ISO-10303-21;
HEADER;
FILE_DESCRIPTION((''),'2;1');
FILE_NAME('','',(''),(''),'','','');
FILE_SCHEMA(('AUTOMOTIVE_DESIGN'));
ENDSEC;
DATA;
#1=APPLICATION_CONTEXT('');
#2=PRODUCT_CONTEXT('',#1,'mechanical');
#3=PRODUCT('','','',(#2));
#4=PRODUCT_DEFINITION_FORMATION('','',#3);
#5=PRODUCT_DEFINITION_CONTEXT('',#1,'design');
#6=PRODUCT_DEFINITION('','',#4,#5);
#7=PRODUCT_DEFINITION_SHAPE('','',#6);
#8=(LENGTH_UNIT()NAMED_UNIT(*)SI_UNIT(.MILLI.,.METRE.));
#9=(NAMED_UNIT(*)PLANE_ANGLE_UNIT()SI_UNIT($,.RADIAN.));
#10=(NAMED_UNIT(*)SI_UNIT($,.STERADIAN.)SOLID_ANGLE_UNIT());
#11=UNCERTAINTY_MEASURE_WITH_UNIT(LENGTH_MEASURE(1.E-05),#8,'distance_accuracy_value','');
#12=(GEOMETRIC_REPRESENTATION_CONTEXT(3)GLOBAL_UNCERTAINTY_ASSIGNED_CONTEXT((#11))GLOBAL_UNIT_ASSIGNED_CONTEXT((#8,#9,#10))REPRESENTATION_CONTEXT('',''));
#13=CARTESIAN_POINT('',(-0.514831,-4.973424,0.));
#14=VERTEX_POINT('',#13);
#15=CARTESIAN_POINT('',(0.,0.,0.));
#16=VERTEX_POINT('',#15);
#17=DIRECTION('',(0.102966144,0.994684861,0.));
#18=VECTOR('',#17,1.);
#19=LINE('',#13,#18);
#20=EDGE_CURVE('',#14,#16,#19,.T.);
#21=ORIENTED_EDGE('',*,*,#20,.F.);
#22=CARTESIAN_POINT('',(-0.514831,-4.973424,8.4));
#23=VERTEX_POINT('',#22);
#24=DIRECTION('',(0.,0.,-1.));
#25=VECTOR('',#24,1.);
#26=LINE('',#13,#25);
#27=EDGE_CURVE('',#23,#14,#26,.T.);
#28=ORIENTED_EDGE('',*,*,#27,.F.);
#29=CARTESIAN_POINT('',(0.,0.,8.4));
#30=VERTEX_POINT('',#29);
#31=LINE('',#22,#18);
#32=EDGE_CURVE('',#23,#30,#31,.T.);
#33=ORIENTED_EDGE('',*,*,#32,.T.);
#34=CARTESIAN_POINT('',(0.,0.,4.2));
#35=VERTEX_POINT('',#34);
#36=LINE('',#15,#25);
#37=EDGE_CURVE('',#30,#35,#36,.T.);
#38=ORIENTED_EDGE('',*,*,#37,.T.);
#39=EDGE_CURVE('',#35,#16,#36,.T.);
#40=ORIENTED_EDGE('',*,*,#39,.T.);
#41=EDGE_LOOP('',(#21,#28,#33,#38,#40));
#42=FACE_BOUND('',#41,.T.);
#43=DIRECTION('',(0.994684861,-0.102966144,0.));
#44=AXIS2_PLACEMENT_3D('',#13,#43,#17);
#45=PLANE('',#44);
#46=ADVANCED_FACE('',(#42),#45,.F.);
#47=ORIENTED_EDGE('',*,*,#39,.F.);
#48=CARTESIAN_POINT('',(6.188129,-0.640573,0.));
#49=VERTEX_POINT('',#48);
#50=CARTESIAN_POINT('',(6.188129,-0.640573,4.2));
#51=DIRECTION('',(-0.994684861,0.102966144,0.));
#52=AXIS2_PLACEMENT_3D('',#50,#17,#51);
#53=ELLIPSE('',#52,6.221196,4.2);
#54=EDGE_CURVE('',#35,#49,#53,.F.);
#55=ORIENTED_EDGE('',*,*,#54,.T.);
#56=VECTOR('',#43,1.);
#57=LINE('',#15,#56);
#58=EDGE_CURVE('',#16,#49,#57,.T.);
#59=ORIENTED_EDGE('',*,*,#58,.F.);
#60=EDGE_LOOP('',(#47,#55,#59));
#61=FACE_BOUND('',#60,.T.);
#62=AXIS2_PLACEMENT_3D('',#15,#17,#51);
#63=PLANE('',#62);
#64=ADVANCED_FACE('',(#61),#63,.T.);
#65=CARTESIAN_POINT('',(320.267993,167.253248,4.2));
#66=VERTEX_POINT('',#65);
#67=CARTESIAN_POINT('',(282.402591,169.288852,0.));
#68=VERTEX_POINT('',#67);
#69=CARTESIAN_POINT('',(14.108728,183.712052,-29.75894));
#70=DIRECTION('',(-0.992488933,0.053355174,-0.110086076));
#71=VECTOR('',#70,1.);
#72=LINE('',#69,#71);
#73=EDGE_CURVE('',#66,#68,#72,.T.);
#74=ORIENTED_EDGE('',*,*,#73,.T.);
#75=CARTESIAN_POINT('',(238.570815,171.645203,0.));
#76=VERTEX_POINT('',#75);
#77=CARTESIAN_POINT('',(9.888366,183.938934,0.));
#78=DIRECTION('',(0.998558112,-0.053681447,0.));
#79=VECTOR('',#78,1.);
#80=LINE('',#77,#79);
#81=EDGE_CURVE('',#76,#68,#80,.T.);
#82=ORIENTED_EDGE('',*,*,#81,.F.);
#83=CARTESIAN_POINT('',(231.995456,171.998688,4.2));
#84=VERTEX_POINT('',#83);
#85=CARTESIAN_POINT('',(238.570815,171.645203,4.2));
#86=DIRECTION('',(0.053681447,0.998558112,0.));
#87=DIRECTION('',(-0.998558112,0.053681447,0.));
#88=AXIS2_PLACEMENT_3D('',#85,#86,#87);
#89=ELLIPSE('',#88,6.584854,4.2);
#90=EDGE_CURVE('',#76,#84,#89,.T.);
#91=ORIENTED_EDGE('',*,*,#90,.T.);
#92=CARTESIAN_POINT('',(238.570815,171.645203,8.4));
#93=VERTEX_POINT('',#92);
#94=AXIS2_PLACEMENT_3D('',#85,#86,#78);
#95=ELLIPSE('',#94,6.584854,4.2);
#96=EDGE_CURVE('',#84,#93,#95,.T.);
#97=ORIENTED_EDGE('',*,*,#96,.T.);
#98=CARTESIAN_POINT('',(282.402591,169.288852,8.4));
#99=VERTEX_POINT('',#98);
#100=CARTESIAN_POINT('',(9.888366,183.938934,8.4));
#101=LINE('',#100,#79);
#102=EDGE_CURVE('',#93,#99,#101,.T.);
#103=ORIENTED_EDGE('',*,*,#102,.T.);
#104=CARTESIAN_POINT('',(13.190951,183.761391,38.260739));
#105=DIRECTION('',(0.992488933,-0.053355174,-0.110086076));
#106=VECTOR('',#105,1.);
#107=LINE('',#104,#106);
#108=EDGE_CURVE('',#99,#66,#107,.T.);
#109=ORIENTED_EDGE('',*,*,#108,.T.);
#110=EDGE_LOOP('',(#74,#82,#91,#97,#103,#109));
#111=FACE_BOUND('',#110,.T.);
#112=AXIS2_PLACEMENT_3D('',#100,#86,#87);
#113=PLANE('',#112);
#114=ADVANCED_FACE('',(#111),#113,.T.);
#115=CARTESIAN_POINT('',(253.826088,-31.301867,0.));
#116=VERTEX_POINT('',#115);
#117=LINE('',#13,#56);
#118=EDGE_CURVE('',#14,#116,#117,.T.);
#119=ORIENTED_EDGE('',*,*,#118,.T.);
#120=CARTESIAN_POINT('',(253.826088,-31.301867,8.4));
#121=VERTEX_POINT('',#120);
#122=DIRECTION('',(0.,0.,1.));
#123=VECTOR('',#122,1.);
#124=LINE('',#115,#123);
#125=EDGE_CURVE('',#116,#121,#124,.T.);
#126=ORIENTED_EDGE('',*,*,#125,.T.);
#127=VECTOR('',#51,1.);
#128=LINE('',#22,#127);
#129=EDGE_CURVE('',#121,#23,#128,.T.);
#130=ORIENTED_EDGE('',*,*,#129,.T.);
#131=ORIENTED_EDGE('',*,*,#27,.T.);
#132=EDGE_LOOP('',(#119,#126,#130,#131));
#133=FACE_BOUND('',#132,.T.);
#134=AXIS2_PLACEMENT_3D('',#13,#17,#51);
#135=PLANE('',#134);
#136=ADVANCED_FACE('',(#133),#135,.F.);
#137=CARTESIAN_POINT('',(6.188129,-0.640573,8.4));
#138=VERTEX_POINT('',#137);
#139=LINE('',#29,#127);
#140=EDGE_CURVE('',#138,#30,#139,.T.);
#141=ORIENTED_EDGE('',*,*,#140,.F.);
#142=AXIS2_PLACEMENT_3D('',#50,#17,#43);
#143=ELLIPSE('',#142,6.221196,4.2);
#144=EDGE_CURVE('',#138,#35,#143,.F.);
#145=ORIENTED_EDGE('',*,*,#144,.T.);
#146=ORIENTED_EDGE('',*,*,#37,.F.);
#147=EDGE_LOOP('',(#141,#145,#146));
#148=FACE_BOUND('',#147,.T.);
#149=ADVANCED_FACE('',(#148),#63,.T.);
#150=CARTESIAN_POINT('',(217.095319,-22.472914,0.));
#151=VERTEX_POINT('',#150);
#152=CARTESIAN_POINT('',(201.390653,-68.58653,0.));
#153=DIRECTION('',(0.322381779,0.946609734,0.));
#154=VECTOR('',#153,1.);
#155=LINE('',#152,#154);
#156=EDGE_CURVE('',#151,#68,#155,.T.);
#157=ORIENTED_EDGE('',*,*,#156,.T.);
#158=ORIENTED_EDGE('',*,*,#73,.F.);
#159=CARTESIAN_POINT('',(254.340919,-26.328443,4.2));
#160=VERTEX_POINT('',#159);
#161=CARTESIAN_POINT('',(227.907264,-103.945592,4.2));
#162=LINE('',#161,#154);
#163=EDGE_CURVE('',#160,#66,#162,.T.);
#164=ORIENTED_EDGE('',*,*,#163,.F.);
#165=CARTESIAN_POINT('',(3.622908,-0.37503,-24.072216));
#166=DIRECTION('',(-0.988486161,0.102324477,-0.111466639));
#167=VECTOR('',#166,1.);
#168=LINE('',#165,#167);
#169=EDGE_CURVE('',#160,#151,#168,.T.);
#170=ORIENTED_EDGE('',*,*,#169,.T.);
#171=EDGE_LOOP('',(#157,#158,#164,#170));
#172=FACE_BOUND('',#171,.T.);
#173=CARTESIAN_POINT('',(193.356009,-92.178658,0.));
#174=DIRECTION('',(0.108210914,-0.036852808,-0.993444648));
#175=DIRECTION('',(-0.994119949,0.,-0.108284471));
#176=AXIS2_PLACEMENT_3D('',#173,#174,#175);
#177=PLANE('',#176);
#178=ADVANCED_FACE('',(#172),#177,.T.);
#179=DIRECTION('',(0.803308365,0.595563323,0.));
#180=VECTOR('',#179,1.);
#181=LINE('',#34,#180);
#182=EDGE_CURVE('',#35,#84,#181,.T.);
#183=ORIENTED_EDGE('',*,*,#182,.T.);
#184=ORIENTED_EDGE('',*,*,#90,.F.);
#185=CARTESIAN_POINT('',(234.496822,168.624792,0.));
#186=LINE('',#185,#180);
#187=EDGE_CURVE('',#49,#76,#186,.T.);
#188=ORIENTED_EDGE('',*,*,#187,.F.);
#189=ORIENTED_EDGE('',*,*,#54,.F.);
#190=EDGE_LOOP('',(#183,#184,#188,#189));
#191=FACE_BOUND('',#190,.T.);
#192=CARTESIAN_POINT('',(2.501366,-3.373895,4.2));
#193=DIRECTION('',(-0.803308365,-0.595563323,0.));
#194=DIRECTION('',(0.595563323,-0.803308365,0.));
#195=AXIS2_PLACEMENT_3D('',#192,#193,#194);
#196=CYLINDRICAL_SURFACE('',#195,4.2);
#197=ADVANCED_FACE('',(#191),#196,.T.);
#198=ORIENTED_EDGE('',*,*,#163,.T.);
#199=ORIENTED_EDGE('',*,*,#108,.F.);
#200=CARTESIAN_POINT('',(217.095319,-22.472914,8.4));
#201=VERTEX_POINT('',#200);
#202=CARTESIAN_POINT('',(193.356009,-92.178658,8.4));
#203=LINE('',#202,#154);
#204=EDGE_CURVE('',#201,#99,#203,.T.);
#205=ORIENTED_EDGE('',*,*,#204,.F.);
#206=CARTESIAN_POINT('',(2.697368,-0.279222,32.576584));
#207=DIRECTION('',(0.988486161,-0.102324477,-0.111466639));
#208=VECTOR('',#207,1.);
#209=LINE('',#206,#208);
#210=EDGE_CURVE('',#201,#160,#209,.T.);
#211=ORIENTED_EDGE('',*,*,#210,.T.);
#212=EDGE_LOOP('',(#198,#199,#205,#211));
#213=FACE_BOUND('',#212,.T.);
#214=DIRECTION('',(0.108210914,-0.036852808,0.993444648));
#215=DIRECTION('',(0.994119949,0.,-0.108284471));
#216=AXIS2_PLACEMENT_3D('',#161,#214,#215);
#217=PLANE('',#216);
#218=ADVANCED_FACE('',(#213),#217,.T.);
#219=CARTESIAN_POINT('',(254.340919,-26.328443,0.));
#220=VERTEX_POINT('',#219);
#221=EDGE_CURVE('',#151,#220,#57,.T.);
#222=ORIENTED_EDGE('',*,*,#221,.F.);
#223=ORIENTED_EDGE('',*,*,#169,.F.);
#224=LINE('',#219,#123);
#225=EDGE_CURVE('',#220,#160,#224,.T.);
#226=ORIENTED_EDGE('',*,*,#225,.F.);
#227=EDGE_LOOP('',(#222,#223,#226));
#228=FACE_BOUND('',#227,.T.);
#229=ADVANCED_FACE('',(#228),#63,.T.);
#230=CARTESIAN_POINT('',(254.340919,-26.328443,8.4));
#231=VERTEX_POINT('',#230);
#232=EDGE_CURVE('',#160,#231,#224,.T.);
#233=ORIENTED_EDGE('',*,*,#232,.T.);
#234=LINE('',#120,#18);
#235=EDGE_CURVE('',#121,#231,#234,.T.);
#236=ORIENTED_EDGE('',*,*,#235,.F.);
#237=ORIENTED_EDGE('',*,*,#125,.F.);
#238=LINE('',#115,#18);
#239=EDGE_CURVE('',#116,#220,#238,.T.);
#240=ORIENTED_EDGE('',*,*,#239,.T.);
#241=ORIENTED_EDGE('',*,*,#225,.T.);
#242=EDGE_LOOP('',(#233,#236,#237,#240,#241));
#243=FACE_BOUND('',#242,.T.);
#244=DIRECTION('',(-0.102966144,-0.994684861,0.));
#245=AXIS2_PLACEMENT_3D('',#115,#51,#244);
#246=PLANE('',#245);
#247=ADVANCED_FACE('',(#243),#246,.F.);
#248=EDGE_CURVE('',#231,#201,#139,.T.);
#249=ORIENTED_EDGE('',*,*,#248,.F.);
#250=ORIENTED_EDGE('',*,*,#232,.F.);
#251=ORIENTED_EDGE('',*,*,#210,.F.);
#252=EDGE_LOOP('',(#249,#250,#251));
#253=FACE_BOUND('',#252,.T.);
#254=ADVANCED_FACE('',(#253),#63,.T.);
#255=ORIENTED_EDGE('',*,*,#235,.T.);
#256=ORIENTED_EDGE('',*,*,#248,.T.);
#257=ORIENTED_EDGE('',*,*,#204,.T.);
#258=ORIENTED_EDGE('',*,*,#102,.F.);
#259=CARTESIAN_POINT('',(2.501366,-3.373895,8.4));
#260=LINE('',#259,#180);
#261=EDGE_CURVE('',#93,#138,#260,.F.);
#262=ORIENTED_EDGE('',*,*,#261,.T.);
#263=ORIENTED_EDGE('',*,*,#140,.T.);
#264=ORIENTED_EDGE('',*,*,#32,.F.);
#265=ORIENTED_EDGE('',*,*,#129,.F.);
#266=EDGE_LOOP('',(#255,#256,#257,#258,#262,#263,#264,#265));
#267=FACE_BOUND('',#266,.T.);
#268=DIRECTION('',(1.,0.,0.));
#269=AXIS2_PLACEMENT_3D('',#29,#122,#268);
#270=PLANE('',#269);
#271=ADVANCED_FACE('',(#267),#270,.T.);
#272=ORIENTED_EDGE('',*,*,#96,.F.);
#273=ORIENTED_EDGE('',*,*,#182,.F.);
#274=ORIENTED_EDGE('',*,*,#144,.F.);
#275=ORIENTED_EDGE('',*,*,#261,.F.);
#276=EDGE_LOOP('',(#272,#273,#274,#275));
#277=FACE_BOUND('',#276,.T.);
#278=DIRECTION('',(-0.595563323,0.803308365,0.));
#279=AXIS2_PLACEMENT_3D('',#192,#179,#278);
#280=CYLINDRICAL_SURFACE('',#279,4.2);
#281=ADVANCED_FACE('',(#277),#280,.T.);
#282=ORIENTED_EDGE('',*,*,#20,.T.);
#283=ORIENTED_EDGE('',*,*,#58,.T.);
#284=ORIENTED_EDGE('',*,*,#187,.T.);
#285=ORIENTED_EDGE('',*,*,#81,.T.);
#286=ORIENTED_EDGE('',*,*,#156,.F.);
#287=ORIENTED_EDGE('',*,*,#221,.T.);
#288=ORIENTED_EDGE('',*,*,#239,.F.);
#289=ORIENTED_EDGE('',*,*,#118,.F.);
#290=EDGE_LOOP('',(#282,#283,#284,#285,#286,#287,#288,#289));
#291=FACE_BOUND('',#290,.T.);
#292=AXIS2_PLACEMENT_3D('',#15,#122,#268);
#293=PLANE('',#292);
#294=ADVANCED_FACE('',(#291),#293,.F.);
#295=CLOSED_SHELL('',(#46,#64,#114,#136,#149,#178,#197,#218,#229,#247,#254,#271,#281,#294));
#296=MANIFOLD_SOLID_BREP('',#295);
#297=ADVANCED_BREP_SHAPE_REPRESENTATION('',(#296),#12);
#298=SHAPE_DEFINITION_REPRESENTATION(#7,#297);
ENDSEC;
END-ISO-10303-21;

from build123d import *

# Parameters (mm, degrees)
BOSS_EXTRUDE1_DEPTH = 8.4
CUT_EXTRUDE2_DEPTH  = 362.634640928
CUT_EXTRUDE4_DEPTH  = 362.634640928
FILLET1_R           = 4.2
SKETCH14_W          = 255.7
SKETCH14_H          = 8.4
BOSS_EXTRUDE2_DEPTH = 5


with BuildPart() as part:
    # Sketch1 → Boss-Extrude1 (new body)
    with BuildSketch(Plane.XY):
        Polygon((320.267992754, 167.253247716), (254.340919031, -26.328442922), (0, 0), (231.995455688, 171.998687612), align=None)
    extrude(amount=BOSS_EXTRUDE1_DEPTH)

    # Sketch4 → Cut-Extrude2 (cut, through all)
    with BuildSketch(Plane(origin=(84.32608447, 247.606712606, 0), x_dir=(0, 0, -1), z_dir=(-0.32238177860112127, -0.9466097341703061, 0))):
        Polygon((0, 212.749400009), (-4.2, 249.249400009), (0, 249.249400009), align=None)
    extrude(amount=CUT_EXTRUDE2_DEPTH, mode=Mode.SUBTRACT)

    # Sketch10 → Cut-Extrude4 (cut, through all)
    with BuildSketch(Plane(origin=(84.32608447, 247.606712606, 0), x_dir=(0, 0, -1), z_dir=(-0.32238177860112127, -0.9466097341703061, 0))):
        Polygon((-4.2, 249.249400009), (-8.4, 212.749400009), (-8.4, 249.249400009), align=None)
    extrude(amount=CUT_EXTRUDE4_DEPTH, mode=Mode.SUBTRACT)

    # Fillet1
    fillet1_edges = [part.edges().sort_by_distance(p)[0] for p in [
        (115.997727844, 85.999343806, 0),
        (115.997727844, 85.999343806, 8.4),
    ]]
    fillet(fillet1_edges, radius=FILLET1_R - 0.0001)  # a hair under: the kernel refuses the full size

    # Sketch14 → Boss-Extrude2 (add)
    with BuildSketch(Plane(origin=(0, 0, 0), x_dir=(0.9946848612849409, -0.10296614361312137, 0), z_dir=(-0.10296614361312136, -0.9946848612849408, 0))):
        with Locations((127.85, 4.2)):
            Rectangle(SKETCH14_W, SKETCH14_H)
    extrude(amount=BOSS_EXTRUDE2_DEPTH)


solid = part.part
